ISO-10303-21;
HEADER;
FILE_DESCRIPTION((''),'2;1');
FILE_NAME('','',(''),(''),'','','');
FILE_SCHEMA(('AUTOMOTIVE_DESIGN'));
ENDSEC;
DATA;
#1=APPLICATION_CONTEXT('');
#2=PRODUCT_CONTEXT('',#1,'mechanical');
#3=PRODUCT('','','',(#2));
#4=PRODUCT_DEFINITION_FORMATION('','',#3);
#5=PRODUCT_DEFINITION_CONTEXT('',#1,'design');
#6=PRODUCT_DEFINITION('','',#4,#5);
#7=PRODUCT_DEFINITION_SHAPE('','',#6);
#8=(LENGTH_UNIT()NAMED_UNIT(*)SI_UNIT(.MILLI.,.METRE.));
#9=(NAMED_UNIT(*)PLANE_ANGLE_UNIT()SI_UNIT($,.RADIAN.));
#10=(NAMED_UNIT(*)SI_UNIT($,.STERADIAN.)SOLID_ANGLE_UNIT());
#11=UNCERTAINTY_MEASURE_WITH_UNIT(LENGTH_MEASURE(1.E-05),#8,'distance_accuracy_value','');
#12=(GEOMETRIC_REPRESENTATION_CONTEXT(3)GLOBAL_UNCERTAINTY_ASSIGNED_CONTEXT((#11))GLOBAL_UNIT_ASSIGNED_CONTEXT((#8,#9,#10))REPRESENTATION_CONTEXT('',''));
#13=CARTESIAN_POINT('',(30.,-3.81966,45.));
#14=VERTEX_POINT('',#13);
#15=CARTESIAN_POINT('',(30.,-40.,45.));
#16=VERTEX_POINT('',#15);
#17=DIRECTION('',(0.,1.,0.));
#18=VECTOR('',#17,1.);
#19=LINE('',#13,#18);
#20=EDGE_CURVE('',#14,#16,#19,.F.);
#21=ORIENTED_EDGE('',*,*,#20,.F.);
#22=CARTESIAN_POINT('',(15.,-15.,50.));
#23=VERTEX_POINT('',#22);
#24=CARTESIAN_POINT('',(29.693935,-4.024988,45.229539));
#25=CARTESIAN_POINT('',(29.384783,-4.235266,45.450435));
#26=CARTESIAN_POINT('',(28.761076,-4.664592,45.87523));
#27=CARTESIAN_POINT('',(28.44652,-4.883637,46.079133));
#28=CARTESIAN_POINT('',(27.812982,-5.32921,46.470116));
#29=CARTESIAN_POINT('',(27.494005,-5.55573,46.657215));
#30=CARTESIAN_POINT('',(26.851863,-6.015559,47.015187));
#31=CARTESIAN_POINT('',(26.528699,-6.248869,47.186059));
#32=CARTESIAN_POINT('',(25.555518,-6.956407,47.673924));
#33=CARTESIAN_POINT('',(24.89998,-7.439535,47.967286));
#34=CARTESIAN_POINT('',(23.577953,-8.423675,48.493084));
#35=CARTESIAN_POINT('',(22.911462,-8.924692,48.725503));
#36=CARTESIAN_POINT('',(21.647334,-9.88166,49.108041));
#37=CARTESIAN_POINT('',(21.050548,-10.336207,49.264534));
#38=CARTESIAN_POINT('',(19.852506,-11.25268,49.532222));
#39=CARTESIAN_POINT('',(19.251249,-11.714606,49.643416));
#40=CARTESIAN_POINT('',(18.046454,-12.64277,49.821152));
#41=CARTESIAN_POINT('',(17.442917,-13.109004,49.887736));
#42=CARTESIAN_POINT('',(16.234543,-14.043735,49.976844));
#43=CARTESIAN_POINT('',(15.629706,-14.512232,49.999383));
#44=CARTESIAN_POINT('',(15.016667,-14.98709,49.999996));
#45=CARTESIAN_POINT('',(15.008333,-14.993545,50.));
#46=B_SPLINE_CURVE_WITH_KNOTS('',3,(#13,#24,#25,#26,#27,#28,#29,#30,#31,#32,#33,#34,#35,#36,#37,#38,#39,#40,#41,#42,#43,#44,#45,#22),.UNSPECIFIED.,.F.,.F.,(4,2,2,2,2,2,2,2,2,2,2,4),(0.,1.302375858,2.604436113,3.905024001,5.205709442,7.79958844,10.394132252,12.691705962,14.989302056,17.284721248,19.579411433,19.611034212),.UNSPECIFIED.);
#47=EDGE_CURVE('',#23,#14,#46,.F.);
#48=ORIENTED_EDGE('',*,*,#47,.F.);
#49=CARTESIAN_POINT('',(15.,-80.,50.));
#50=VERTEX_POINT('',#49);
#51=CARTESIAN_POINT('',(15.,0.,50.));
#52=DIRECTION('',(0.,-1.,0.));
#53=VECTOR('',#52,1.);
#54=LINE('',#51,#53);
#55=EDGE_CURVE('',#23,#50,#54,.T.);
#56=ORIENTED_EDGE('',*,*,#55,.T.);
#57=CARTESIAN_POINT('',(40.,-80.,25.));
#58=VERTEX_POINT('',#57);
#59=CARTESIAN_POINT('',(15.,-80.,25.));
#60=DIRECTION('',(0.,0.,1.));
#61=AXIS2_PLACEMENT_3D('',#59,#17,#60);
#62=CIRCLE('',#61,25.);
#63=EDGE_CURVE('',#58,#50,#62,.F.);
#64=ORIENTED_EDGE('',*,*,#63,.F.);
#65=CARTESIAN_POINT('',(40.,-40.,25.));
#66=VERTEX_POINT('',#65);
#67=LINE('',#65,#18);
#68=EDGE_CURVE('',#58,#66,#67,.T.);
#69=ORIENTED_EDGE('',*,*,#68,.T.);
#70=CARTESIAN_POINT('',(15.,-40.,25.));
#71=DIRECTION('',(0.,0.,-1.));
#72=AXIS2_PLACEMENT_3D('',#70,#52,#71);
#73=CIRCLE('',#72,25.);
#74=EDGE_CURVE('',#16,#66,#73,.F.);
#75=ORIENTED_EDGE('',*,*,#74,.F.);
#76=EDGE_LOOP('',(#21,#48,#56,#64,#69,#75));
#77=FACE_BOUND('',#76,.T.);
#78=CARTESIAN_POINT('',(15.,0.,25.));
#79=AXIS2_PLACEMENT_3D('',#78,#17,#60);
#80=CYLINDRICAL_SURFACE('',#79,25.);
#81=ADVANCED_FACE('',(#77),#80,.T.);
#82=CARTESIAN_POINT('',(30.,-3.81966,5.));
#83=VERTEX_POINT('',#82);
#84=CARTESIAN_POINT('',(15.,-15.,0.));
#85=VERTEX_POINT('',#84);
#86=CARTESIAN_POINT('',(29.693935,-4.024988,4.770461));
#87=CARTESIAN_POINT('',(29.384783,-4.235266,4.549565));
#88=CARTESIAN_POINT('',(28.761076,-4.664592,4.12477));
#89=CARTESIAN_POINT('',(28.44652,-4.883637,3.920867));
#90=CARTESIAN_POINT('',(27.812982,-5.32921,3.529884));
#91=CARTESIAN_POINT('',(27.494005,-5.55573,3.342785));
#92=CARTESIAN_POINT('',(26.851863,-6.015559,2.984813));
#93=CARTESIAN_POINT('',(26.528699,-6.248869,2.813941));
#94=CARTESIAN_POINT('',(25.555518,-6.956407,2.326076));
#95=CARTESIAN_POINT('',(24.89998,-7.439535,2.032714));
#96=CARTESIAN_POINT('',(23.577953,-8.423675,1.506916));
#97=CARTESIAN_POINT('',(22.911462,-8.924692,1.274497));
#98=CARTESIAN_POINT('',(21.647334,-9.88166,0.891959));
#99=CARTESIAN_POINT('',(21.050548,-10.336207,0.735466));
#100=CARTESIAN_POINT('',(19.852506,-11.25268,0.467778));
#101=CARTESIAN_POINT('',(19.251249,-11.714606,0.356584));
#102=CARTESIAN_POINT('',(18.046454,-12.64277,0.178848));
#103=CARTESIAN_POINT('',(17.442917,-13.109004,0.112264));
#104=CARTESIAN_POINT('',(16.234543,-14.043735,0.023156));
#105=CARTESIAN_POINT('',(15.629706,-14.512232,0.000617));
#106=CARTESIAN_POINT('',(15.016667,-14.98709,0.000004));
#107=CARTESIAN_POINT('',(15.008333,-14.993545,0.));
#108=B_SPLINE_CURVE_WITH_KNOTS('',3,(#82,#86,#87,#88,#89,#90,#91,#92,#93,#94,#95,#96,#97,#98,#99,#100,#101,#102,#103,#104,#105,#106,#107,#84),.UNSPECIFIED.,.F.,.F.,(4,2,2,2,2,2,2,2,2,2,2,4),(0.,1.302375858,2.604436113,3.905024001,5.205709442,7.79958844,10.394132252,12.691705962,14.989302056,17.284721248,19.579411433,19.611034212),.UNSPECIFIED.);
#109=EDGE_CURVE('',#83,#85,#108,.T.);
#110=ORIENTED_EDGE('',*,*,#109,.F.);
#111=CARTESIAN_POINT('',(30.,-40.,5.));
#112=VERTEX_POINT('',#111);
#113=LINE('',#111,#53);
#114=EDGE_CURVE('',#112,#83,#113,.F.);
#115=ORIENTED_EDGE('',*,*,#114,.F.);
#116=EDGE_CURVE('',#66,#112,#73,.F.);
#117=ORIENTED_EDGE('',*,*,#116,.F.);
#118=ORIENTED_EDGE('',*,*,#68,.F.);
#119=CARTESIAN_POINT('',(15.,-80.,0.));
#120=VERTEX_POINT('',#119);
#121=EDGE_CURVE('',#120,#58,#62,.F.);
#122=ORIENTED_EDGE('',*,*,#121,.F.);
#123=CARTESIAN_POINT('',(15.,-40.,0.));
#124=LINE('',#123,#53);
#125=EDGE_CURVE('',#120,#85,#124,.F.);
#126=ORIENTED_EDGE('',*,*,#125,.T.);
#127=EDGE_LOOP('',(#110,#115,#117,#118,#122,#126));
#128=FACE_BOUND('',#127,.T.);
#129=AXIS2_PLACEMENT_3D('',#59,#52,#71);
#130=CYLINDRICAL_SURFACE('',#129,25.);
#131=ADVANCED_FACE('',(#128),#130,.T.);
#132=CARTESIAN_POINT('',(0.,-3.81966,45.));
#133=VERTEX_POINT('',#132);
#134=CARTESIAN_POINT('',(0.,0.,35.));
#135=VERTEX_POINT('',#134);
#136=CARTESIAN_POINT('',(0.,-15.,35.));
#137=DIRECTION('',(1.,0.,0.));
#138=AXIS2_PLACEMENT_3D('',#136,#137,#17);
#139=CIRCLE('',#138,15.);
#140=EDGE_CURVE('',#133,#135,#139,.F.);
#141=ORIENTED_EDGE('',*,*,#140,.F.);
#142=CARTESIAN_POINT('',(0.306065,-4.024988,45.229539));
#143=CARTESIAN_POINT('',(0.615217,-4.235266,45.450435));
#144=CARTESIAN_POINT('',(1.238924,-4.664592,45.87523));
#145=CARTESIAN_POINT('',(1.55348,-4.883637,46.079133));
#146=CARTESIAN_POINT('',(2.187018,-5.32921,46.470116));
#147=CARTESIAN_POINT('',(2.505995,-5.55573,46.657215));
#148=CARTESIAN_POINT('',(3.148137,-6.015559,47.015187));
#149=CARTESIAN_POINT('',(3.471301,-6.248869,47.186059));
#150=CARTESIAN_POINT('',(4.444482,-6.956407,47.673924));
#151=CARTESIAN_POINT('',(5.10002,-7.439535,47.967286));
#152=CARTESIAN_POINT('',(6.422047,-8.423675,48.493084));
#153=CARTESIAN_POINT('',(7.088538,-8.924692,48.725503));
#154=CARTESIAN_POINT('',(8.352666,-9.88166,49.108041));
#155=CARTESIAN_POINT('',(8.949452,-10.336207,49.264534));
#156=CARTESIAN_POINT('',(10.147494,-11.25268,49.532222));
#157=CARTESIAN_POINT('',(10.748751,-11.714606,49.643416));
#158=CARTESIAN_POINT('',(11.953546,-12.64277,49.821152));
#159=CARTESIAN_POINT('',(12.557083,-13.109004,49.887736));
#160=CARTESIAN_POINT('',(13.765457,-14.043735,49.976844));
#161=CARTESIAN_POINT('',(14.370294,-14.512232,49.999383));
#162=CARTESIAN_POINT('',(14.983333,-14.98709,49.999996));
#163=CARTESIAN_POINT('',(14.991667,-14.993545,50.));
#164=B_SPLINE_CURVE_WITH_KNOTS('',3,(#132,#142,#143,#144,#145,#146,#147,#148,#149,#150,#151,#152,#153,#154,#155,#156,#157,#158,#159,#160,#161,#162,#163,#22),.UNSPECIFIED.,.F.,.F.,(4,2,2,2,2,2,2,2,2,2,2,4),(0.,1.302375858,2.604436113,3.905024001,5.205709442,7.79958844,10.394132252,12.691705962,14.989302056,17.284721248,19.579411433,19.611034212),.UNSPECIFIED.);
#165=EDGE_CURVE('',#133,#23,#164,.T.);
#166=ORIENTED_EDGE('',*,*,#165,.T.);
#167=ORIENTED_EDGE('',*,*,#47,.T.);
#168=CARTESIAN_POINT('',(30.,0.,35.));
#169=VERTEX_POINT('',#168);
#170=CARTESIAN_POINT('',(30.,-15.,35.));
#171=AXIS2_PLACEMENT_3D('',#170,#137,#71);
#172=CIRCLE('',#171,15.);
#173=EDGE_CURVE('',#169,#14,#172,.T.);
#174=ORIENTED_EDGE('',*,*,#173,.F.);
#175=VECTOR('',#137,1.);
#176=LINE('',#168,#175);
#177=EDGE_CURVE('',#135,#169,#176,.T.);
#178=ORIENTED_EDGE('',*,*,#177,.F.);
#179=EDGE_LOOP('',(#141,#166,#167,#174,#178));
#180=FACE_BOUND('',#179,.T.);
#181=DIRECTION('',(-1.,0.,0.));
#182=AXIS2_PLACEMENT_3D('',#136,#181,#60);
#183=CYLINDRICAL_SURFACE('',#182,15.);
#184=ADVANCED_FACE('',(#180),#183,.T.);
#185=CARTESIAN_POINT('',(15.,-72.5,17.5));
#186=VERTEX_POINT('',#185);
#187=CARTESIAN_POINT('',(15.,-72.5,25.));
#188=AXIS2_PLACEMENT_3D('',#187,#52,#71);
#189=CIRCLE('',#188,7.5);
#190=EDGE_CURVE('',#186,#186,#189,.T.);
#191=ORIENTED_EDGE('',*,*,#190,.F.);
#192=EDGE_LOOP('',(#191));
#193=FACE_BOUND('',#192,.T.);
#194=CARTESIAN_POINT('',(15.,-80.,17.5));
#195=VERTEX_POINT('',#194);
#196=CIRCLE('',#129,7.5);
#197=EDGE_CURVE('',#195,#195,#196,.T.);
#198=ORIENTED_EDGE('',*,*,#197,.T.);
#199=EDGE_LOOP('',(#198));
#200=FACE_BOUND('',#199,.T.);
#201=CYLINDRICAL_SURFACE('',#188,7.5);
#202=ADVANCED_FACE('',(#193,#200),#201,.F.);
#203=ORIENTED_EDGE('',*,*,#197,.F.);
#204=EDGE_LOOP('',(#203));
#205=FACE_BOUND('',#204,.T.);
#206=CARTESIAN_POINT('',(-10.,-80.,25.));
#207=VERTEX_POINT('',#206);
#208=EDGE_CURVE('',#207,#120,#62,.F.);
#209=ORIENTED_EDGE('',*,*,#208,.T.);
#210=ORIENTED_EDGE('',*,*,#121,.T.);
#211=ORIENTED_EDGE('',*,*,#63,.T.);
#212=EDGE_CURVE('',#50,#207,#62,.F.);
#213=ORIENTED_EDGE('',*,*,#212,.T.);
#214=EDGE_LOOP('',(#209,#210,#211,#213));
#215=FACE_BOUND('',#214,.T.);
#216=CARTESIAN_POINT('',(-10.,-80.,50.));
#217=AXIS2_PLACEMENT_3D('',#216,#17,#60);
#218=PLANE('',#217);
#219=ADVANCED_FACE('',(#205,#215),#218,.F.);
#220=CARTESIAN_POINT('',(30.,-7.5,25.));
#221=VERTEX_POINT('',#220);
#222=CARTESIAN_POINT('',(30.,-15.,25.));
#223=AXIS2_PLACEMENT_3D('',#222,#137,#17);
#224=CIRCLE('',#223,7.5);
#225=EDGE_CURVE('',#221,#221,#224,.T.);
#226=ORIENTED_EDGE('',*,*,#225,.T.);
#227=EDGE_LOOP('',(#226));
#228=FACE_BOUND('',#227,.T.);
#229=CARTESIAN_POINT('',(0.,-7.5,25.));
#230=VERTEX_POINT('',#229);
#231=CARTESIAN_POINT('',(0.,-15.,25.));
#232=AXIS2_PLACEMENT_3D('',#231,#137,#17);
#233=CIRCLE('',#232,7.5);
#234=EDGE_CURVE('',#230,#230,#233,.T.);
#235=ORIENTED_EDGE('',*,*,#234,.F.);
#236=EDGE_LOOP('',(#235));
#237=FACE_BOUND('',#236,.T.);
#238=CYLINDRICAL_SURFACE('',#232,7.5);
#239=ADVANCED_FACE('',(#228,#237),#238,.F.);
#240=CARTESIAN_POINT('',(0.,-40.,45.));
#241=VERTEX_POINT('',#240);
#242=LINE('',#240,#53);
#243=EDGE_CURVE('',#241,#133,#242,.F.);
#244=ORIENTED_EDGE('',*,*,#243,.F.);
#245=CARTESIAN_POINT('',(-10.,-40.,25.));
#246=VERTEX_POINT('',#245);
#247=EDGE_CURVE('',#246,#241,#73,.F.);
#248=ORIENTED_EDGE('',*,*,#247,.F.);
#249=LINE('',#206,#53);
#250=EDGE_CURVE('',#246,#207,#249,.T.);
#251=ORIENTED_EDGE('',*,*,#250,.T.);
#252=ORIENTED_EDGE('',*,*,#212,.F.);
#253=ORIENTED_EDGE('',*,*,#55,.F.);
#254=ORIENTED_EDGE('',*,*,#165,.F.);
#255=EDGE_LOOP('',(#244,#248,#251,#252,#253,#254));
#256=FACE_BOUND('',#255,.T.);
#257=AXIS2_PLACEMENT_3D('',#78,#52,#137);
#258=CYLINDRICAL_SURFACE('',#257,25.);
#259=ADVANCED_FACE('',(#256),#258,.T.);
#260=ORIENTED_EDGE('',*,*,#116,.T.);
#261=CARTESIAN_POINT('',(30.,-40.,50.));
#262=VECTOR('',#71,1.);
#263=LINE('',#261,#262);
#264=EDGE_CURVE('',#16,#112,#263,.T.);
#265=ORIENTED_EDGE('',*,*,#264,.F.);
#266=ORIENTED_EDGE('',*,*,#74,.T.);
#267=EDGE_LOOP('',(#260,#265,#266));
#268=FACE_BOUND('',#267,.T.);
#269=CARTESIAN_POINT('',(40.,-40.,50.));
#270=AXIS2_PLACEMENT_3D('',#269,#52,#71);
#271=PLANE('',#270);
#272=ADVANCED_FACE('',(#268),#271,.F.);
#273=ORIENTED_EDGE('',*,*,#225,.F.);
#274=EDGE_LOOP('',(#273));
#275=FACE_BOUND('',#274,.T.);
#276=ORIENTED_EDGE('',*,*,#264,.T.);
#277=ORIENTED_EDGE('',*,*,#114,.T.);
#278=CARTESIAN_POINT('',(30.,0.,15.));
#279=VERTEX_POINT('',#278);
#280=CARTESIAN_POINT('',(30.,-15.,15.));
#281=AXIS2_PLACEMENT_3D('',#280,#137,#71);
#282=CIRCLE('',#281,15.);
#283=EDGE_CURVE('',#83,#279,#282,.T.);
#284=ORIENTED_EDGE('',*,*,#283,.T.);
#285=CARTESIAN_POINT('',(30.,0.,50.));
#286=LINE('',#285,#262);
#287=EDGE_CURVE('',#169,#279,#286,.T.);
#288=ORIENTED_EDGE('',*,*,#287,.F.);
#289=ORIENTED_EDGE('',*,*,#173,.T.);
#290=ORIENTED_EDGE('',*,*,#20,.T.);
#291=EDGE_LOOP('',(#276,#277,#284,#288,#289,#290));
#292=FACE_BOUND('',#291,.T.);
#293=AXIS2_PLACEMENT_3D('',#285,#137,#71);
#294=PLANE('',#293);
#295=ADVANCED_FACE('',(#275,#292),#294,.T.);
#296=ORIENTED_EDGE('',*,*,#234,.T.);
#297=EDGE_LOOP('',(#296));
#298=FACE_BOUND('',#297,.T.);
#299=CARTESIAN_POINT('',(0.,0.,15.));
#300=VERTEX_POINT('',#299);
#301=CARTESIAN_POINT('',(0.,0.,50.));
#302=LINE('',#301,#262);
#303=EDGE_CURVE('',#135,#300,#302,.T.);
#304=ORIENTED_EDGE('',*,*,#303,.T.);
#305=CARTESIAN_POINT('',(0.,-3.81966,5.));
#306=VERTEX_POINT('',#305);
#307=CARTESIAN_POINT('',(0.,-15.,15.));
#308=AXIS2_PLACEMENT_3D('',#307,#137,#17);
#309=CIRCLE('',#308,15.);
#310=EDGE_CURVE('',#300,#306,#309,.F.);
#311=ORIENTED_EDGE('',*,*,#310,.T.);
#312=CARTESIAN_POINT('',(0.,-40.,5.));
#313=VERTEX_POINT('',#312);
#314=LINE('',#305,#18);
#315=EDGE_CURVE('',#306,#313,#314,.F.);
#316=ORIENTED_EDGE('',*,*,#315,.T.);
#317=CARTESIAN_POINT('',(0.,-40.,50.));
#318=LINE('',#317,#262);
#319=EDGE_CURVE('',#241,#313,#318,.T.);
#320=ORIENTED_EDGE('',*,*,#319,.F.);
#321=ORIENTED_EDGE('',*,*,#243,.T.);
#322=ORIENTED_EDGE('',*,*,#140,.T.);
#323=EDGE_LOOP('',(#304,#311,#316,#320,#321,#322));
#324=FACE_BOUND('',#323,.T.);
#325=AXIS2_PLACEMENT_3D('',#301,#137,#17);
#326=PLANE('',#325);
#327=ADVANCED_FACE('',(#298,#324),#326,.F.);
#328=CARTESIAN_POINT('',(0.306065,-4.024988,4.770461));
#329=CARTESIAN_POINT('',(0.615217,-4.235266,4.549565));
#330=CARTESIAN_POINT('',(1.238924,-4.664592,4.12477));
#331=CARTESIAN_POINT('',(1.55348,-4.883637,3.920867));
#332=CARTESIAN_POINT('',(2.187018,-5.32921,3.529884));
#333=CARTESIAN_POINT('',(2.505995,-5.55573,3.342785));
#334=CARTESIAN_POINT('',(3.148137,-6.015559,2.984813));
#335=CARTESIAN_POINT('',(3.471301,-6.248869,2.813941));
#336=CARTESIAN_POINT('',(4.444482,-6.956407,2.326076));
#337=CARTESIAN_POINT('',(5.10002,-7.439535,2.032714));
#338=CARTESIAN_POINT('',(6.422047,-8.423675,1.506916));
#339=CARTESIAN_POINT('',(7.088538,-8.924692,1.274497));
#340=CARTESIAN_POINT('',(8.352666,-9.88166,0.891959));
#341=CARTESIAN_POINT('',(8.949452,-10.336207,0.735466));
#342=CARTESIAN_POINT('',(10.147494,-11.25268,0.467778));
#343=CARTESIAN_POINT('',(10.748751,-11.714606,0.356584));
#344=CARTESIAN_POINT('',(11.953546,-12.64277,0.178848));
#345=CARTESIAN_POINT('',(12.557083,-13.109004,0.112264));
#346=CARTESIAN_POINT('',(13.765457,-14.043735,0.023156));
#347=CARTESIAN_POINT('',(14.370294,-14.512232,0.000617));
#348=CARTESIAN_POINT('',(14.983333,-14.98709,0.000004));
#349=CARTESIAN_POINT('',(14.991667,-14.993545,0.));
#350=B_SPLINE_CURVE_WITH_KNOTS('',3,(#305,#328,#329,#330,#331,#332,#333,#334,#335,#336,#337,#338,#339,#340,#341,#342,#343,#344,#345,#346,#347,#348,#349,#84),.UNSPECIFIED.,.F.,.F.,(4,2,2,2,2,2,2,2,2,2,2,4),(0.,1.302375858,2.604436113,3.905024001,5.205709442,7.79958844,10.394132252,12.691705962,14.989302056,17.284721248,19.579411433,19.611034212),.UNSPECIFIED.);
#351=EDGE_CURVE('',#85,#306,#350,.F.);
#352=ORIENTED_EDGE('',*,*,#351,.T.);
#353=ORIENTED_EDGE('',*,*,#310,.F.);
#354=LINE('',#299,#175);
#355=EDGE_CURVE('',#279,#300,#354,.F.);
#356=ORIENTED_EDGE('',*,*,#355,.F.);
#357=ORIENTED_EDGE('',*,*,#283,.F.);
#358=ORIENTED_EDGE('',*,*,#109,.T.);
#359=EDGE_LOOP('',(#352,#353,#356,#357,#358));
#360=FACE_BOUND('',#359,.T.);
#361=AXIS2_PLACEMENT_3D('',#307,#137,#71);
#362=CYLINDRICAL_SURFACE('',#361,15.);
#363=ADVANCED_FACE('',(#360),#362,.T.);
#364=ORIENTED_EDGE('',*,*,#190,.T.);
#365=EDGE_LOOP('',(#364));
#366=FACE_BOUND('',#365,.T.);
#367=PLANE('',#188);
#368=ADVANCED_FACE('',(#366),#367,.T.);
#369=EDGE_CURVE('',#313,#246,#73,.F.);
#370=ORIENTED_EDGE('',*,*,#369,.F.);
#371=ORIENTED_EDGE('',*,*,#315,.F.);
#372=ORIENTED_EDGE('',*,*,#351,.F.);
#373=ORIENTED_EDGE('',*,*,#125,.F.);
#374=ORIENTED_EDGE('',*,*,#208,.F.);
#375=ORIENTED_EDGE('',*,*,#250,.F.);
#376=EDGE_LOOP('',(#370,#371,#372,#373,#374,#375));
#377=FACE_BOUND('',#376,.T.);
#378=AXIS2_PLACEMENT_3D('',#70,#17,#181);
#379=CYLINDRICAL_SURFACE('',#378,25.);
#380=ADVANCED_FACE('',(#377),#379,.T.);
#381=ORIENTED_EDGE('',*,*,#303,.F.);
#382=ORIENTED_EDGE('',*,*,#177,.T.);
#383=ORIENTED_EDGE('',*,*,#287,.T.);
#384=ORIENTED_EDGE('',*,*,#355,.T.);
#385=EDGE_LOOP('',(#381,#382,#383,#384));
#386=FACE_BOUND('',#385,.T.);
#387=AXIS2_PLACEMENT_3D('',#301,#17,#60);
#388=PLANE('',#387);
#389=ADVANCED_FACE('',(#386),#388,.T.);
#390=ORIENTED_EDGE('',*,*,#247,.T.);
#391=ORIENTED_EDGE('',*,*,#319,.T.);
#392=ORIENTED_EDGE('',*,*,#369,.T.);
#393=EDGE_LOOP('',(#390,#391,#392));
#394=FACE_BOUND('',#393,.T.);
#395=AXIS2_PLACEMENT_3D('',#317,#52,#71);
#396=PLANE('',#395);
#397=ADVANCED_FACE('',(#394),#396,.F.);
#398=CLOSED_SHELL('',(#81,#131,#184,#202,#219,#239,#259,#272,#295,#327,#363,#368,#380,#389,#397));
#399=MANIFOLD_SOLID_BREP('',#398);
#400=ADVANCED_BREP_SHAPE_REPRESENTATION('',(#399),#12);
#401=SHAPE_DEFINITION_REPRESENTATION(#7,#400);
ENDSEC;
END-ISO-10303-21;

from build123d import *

# Parameters (mm, degrees)
SALIENTE_EXTRUIR1_DEPTH = 50
REDONDEO1_R             = 15
CROQUIS2_R              = 7.5
CORTAR_EXTRUIR1_DEPTH   = 30
REDONDEO3_R             = 25
CROQUIS3_R              = 7.5
CORTAR_EXTRUIR2_DEPTH   = 7.5


with BuildPart() as part:
    # Croquis1 → Saliente-Extruir1 (new body)
    with BuildSketch(Plane.XY):
        Polygon((0, 0), (30, 0), (30, -40), (40, -40), (40, -80), (-10, -80), (-10, -40), (0, -40), align=None)
    extrude(amount=SALIENTE_EXTRUIR1_DEPTH)

    # Redondeo1
    redondeo1_edges = [part.edges().sort_by_distance(p)[0] for p in [
        (15, 0, 0),
        (15, 0, 50),
    ]]
    fillet(redondeo1_edges, radius=REDONDEO1_R)

    # Croquis2 → Cortar-Extruir1 (cut)
    with BuildSketch(Plane(origin=(30, 0, 0), x_dir=(0, 0, -1), z_dir=(1, 0, 0))):
        with Locations(Location((-25, -15, 0), (0, 0, 90))):
            Circle(CROQUIS2_R)
    extrude(amount=-CORTAR_EXTRUIR1_DEPTH, mode=Mode.SUBTRACT)

    # Redondeo3
    # the kernel refuses this fillet: 25 mm, written as the material it takes off along each edge
    with BuildSketch(Plane(origin=(-10, -142.5, 50), x_dir=(1, 0, 0), z_dir=(0, 1, 0)), Plane(origin=(40, 22.5, 50), x_dir=(-1, 0, 0), z_dir=(0, -1, 0))) as redondeo3_piece_1:
        with BuildLine():
            CenterArc((REDONDEO3_R, REDONDEO3_R), REDONDEO3_R, 180, 90)
            Line((0, REDONDEO3_R), (0, 0))
            Line((0, 0), (REDONDEO3_R, 0))
        make_face()
    extrude(amount=165, mode=Mode.SUBTRACT)
    with BuildSketch(Plane(origin=(-10, -142.5, 0), x_dir=(1, 0, 0), z_dir=(0, 1, 0)), Plane(origin=(40, 22.5, 0), x_dir=(-1, 0, 0), z_dir=(0, -1, 0))) as redondeo3_piece_2:
        with BuildLine():
            CenterArc((REDONDEO3_R, -REDONDEO3_R), REDONDEO3_R, 90, 90)
            Line((0, -REDONDEO3_R), (0, 0))
            Line((0, 0), (REDONDEO3_R, 0))
        make_face()
    extrude(amount=165, mode=Mode.SUBTRACT)

    # Croquis3 → Cortar-Extruir2 (cut)
    with BuildSketch(Plane.XZ.offset(80)):
        with Locations(Location((15, 25, 0), (0, 0, 270))):
            Circle(CROQUIS3_R)
    extrude(amount=-CORTAR_EXTRUIR2_DEPTH, mode=Mode.SUBTRACT)


solid = part.part
